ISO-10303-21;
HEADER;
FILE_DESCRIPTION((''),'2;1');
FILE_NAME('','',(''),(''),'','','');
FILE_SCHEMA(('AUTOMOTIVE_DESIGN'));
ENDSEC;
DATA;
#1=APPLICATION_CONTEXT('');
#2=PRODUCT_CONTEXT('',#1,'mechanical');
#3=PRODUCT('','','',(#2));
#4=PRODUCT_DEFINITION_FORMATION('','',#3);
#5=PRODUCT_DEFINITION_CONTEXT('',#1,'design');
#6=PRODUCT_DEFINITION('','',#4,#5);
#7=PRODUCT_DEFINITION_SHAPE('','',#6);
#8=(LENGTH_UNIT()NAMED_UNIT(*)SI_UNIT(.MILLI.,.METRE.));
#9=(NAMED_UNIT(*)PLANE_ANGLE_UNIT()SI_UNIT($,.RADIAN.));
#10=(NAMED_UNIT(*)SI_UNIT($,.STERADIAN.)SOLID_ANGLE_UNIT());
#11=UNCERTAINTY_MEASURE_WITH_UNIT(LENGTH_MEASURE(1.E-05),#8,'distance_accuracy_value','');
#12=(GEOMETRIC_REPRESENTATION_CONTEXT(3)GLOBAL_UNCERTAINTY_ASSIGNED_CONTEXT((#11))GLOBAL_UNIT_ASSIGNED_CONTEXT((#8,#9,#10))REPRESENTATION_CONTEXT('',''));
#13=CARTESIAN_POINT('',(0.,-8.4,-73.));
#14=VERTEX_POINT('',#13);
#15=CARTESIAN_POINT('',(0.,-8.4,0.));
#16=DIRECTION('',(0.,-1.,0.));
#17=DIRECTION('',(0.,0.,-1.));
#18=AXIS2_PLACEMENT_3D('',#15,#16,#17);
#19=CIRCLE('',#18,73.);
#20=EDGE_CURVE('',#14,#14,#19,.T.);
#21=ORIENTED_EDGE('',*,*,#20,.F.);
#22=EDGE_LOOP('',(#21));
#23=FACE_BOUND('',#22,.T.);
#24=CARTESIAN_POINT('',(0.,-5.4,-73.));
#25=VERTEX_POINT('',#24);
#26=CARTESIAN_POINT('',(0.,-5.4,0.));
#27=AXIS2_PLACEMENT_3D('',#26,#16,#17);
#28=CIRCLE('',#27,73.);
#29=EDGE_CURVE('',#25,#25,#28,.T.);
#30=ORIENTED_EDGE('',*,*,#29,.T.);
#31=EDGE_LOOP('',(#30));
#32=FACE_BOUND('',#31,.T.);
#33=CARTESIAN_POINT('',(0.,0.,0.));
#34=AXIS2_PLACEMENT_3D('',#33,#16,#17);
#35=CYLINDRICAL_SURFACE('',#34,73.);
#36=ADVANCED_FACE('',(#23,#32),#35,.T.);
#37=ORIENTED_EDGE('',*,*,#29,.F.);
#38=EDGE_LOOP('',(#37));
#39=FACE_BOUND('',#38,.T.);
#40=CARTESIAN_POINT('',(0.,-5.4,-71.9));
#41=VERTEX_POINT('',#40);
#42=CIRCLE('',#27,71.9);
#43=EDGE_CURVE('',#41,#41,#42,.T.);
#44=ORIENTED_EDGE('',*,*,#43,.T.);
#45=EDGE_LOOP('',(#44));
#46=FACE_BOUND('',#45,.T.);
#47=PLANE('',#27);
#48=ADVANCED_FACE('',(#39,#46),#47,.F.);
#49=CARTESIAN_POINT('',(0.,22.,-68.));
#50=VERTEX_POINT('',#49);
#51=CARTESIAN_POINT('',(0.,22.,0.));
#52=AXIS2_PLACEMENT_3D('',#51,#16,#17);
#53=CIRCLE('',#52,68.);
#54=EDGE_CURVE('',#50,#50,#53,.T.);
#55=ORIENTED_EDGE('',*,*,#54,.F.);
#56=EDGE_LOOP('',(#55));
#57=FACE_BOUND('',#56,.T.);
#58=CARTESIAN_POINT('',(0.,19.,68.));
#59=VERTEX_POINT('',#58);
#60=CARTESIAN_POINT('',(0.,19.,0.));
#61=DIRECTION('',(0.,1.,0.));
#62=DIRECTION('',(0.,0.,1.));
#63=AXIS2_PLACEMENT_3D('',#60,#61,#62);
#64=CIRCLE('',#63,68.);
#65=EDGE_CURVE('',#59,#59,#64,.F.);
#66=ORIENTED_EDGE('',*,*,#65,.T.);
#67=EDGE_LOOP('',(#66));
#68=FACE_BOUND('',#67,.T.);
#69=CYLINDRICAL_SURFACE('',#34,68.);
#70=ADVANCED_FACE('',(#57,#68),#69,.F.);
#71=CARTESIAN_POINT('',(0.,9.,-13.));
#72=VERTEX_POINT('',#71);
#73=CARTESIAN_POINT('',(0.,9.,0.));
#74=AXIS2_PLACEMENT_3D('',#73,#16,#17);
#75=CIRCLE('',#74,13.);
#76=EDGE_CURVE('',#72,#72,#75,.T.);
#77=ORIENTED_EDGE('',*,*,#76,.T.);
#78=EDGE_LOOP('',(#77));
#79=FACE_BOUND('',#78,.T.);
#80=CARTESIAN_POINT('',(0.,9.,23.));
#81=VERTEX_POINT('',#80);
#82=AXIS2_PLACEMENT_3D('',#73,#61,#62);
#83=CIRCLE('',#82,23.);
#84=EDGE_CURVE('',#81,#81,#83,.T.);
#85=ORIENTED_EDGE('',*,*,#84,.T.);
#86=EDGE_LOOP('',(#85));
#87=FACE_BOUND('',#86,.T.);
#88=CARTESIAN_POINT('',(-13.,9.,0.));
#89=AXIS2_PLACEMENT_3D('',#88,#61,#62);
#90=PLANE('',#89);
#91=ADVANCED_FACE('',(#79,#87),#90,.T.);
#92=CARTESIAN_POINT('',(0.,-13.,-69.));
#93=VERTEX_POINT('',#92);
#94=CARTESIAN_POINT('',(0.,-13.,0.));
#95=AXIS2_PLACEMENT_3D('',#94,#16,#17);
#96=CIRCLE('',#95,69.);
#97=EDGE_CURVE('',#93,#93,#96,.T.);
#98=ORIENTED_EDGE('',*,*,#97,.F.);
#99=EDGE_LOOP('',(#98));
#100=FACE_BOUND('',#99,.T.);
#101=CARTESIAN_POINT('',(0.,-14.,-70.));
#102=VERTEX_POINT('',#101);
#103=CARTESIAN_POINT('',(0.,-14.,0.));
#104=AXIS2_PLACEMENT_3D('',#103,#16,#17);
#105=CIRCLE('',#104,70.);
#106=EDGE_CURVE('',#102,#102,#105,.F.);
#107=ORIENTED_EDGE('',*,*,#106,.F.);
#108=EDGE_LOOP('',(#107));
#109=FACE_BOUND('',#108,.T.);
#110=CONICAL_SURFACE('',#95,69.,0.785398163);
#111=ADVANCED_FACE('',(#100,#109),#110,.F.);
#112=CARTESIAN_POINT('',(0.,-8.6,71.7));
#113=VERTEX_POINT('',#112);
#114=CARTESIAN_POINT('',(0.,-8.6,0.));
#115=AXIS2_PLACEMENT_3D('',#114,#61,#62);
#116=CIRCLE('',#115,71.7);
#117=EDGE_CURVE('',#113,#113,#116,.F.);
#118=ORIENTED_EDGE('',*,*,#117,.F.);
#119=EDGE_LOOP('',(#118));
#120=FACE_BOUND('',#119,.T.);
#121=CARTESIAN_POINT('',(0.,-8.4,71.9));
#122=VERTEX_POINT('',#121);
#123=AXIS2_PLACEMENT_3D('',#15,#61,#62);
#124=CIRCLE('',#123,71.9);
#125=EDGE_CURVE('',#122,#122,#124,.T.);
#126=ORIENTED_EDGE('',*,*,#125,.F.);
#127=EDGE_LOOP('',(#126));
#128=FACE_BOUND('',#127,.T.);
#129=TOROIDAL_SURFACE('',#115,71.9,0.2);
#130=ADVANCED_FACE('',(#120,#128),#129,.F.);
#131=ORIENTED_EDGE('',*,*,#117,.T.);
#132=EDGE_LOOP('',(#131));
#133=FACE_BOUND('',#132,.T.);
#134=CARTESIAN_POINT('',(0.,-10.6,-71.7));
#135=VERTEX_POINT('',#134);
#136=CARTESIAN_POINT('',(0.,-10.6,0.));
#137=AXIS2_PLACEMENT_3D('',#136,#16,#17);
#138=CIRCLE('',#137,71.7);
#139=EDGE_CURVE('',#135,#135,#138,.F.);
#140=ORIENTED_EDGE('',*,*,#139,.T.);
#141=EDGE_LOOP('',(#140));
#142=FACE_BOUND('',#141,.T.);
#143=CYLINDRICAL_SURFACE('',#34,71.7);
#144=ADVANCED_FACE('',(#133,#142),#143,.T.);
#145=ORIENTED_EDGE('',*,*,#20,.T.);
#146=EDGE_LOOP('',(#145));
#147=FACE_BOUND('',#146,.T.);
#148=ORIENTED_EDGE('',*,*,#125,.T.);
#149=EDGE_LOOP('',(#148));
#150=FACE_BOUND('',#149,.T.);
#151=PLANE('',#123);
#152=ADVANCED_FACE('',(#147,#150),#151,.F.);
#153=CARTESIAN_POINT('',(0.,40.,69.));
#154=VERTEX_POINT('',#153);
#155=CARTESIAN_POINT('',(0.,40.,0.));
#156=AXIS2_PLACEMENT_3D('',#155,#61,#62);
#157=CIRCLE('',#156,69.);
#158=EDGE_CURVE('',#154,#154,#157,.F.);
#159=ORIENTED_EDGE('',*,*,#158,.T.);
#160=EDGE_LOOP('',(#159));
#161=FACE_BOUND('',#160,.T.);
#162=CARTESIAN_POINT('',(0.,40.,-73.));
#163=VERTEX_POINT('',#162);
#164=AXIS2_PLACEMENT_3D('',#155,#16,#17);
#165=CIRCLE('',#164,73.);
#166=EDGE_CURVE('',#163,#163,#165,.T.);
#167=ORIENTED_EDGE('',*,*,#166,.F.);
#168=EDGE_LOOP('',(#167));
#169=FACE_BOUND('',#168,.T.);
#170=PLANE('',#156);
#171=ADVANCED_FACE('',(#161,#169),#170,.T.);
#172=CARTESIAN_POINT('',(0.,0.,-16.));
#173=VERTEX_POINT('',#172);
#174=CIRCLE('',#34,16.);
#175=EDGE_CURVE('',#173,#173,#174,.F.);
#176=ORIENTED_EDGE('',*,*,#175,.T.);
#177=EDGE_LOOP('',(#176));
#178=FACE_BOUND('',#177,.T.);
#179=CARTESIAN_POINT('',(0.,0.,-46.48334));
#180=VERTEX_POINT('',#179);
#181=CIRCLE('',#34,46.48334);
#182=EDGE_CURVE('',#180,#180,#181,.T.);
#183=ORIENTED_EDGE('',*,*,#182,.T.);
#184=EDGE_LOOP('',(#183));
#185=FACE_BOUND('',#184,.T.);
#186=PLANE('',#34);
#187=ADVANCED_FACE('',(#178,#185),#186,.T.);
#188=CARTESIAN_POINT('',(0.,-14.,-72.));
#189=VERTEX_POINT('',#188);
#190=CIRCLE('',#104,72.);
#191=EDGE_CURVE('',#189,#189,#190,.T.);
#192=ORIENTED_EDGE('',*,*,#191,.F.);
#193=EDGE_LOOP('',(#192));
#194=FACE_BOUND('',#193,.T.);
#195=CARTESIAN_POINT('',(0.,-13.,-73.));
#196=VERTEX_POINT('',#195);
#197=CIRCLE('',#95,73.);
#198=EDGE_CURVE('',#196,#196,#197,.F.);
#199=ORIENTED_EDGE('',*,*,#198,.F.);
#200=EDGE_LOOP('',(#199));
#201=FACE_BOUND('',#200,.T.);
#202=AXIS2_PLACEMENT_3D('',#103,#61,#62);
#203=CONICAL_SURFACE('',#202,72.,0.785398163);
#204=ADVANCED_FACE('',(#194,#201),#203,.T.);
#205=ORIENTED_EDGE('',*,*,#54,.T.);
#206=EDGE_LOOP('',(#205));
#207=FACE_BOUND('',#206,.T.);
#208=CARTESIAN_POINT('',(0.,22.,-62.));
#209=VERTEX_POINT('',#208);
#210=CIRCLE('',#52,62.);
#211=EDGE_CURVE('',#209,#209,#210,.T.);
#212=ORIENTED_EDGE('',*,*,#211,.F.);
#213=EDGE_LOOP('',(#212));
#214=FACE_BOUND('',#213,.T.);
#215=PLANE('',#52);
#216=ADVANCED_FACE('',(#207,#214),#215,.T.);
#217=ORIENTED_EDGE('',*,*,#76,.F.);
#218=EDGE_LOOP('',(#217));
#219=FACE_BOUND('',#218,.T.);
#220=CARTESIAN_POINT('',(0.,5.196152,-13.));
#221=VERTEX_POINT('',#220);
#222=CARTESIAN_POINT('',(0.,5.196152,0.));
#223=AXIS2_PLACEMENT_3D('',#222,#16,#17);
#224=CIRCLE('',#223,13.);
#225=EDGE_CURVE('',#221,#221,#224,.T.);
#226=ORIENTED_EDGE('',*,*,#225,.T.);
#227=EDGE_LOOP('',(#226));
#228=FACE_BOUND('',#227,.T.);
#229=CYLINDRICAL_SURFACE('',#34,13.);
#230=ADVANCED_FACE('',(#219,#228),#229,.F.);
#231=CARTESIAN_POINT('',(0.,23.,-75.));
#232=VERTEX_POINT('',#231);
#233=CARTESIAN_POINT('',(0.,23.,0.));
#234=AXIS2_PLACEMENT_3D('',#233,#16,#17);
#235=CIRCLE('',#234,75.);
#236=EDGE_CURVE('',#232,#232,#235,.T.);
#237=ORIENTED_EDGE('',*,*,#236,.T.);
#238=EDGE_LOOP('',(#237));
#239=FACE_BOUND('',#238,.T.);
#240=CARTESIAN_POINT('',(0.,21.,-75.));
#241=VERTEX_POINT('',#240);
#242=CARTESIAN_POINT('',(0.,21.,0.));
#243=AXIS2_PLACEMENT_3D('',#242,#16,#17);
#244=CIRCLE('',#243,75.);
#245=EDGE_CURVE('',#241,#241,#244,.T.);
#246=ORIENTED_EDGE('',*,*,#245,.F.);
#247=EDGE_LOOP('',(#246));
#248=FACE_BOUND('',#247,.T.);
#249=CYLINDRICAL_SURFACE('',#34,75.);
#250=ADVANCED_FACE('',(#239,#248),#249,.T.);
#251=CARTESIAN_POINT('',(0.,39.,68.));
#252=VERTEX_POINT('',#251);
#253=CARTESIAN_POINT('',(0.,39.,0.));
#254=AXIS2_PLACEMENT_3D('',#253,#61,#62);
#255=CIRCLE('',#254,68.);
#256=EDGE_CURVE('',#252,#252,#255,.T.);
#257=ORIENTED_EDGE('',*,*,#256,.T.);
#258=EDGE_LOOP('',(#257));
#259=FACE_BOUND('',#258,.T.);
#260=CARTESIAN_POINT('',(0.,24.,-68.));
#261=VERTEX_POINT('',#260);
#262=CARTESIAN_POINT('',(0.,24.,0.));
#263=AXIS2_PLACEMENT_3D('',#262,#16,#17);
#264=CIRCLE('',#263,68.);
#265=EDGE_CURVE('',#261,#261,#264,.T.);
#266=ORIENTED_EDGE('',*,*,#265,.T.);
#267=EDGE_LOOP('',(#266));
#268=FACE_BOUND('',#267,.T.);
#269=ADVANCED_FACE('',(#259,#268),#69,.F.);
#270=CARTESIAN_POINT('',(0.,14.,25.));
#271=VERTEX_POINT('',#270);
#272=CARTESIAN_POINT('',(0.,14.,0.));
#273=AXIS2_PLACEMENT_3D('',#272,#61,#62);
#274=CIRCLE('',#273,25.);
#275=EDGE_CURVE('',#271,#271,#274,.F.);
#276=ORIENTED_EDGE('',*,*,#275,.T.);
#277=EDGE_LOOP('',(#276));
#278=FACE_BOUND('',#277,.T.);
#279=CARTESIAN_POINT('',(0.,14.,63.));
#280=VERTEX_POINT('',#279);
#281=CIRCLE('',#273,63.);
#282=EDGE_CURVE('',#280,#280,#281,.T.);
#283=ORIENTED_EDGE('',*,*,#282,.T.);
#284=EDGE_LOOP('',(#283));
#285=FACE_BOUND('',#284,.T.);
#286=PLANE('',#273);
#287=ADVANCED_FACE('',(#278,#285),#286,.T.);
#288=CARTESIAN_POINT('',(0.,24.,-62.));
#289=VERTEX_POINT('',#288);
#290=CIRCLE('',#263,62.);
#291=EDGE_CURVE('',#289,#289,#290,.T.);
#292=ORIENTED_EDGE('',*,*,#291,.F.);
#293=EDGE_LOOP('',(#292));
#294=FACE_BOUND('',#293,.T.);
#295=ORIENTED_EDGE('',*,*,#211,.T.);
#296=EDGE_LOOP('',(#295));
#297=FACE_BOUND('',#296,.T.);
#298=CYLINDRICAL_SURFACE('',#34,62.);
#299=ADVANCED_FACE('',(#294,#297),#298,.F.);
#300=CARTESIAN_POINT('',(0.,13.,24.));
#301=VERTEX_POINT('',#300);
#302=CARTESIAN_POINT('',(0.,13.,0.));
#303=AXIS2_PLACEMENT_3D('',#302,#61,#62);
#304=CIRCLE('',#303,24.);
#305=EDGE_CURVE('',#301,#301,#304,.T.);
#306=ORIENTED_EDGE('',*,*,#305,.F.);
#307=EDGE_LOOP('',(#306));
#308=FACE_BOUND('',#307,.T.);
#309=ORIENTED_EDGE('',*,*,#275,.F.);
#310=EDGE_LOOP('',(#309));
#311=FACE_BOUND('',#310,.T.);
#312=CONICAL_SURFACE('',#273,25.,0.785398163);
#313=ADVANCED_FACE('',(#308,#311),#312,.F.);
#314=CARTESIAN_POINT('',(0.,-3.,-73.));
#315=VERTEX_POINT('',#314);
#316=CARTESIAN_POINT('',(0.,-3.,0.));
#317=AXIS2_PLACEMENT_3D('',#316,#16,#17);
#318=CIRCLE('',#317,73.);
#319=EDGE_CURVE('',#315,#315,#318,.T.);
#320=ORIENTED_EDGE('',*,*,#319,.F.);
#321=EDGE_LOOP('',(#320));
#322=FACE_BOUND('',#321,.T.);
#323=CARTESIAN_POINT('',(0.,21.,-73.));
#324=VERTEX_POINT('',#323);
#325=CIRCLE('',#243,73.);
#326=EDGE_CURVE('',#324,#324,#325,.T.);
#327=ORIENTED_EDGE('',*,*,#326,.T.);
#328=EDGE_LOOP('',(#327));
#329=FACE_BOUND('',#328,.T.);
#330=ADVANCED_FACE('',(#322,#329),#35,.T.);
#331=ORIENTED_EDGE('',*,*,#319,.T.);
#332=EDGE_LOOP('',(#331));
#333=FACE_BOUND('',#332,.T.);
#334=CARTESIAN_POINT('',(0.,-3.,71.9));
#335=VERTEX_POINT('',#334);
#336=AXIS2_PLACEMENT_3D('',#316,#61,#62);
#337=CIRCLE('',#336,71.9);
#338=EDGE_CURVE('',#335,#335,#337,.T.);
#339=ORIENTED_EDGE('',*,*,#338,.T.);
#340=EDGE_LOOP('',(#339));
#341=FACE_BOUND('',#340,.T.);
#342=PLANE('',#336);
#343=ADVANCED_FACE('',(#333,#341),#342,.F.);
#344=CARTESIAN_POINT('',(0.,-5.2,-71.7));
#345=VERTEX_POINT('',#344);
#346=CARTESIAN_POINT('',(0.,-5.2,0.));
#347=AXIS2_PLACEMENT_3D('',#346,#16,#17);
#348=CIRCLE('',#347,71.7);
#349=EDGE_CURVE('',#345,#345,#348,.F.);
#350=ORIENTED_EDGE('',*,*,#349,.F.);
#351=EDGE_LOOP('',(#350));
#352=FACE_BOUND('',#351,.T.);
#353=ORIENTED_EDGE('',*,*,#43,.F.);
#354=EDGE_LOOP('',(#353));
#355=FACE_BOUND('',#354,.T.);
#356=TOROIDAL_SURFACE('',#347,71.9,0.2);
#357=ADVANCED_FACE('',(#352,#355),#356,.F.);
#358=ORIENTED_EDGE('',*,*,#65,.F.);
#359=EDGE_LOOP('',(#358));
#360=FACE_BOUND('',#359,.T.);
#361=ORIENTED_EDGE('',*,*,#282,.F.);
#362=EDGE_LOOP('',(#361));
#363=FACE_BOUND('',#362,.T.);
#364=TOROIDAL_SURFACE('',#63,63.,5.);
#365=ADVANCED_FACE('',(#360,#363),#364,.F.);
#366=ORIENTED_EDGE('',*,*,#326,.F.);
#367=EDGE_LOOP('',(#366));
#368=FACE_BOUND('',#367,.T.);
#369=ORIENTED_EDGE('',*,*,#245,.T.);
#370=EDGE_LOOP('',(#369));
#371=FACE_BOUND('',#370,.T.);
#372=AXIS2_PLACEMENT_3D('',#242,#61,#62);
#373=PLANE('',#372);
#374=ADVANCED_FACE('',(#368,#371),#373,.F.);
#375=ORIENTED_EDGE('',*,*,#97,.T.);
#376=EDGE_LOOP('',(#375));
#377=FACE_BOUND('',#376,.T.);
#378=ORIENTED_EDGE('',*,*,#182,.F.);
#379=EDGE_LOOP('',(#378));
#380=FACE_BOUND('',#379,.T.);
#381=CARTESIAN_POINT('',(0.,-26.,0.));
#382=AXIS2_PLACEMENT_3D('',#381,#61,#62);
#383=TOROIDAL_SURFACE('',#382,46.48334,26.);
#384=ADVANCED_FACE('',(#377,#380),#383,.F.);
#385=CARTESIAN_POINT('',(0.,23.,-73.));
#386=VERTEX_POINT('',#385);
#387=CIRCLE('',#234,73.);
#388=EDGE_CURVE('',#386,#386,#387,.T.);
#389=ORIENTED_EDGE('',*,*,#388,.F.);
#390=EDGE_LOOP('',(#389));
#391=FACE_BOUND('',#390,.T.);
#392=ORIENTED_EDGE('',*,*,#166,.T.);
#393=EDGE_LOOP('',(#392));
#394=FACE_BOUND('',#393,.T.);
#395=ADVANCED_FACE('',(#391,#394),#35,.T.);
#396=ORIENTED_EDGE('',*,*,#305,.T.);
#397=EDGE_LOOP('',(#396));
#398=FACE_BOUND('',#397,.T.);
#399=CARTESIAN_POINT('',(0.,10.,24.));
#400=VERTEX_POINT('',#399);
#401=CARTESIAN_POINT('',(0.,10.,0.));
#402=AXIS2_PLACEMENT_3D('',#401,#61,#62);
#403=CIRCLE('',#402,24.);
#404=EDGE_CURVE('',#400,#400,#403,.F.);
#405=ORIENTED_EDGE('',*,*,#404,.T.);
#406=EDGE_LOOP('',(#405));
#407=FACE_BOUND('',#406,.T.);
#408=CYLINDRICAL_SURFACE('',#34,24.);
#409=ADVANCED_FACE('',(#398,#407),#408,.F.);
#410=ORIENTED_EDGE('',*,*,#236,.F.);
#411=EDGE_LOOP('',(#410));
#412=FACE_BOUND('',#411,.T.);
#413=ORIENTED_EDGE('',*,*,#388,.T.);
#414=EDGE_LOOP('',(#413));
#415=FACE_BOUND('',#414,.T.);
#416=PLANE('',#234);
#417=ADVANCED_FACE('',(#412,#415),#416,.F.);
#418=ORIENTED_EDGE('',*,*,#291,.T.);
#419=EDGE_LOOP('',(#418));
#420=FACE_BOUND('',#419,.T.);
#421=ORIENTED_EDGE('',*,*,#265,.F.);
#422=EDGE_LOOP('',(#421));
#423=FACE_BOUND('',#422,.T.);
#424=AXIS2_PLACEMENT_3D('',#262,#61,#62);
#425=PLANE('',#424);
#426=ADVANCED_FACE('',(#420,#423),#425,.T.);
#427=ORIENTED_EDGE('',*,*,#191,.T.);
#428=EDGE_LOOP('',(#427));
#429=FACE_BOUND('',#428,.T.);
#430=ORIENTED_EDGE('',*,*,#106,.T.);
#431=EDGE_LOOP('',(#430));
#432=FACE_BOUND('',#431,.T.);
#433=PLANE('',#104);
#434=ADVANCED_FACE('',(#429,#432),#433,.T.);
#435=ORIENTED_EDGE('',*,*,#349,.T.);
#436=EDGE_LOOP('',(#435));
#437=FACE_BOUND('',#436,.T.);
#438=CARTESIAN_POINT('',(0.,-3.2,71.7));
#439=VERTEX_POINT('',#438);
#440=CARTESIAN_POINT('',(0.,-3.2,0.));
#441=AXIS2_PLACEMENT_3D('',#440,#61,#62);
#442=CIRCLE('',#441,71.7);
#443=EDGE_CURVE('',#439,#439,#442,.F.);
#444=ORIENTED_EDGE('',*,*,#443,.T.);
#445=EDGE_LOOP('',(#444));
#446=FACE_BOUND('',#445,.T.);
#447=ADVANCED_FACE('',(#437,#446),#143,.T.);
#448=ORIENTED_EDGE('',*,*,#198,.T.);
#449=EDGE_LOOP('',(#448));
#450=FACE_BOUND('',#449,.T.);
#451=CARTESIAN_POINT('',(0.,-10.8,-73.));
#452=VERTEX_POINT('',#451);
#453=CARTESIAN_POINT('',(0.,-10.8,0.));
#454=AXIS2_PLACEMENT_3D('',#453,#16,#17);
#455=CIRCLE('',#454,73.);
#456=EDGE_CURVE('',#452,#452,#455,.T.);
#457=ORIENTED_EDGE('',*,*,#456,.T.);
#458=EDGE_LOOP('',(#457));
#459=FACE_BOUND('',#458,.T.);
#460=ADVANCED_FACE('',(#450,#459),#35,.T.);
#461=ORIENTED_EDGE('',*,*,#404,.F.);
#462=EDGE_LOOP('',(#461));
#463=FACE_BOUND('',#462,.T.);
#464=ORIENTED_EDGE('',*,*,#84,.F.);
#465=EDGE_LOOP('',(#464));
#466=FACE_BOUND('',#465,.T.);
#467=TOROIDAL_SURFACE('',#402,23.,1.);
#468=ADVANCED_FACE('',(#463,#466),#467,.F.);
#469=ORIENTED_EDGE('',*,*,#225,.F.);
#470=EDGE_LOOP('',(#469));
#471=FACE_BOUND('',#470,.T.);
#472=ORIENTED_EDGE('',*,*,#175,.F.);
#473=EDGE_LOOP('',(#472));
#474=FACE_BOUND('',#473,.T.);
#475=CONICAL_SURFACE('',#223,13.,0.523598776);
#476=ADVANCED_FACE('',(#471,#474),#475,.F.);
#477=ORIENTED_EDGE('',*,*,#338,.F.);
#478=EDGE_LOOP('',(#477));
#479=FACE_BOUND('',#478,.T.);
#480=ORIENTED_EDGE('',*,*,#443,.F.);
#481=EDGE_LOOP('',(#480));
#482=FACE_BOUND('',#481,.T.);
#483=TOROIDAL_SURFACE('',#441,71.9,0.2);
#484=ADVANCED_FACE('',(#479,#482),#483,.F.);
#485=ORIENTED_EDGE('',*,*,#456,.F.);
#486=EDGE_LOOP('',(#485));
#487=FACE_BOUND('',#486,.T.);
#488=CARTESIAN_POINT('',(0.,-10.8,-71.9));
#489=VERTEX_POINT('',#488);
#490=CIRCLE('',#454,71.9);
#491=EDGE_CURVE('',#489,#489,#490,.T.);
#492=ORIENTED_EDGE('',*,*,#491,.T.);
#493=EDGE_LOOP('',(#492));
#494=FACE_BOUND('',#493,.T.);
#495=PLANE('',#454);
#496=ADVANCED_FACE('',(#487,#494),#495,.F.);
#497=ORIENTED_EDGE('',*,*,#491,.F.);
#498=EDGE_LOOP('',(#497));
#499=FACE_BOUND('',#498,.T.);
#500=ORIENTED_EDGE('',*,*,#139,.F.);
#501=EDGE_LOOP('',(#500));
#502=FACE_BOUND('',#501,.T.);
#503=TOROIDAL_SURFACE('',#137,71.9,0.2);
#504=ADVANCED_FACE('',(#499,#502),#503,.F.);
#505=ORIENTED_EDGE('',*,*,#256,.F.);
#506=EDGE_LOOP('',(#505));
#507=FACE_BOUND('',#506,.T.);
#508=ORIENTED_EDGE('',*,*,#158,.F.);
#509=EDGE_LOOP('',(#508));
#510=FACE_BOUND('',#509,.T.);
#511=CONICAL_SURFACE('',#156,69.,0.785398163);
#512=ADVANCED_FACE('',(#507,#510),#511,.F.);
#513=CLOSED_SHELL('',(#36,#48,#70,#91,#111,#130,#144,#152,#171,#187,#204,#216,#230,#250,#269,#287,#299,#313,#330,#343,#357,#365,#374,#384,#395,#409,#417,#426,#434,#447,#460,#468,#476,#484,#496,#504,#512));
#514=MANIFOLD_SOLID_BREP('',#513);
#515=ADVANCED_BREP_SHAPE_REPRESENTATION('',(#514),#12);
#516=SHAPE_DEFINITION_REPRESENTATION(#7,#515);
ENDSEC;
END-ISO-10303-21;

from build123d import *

# Parameters (mm, degrees)
SCHIZZO1_W    = 11
SCHIZZO1_H    = 5
SCHIZZO1_W_2  = 2
SCHIZZO1_H_2  = 2
SCHIZZO1_W_3  = 6
SMUSSO1_SIZE  = 3
SMUSSO1_SIZE2 = 5.196152423
SMUSSO2_SIZE  = 1
RACCORDO1_R   = 26
SMUSSO3_SIZE  = 1
RACCORDO2_R   = 0.2
SCHIZZO2_W    = 11
SCHIZZO2_H    = 5
RACCORDO3_R   = 1
SMUSSO4_SIZE  = 1
RACCORDO4_R   = 5
SMUSSO5_SIZE  = 1


with BuildPart() as part:
    # Schizzo1 → Rivoluzione1 (revolve)
    with BuildSketch(Plane.XY, mode=Mode.PRIVATE) as rivoluzione1_sk:
        Polygon((-13, 9), (-13, 0), (-73, 0), (-73, 14), (-24, 14), (-24, 9), align=None)
        with Locations((-18.5, 11.5)):
            Rectangle(SCHIZZO1_W, SCHIZZO1_H)
        Polygon((-73, 21), (-73, 14), (-68, 14), (-68, 22), (-68, 24), (-68, 40), (-73, 40), (-73, 23), align=None)
        Polygon((-69, -14), (-69, 0), (-73, 0), (-73, -3), (-71.7, -3), (-71.7, -5.4), (-73, -5.4), (-73, -8.4), (-71.7, -8.4), (-71.7, -10.8), (-73, -10.8), (-73, -14), align=None)
        with Locations((-74, 22)):
            Rectangle(SCHIZZO1_W_2, SCHIZZO1_H_2)
        with Locations((-65, 23)):
            Rectangle(SCHIZZO1_W_3, SCHIZZO1_H_2)
    revolve(rivoluzione1_sk.sketch.rotate(Axis((0, 0, 0), (0, 1, 0)), 270), axis=Axis((0, 0, 0), (0, 1, 0)))

    # Smusso1
    smusso1_edges = [part.edges().sort_by_distance(p)[0] for p in [
        (0, 0, 13),
    ]]
    smusso1_side = [part.faces().sort_by_distance(p)[0] for p in [
        (0, 0, 67.048385284),
    ]]
    chamfer(smusso1_edges, length=SMUSSO1_SIZE, length2=SMUSSO1_SIZE2, reference=smusso1_side[0])

    # Smusso2
    smusso2_edges = [part.edges().sort_by_distance(p)[0] for p in [
        (0, -14, 69),
    ]]
    chamfer(smusso2_edges, length=SMUSSO2_SIZE)

    # Raccordo1
    # the kernel refuses this fillet: 26 mm, written as the material it adds along each edge
    with BuildSketch(Plane(origin=(0, 0, 0), x_dir=(0, 0, -1), z_dir=(1, 0, 0))) as raccordo1_piece_1:
        with BuildLine():
            CenterArc((46.483339502, -26), RACCORDO1_R, 30, 60)
            Line((46.483339502, 0), (46.483339502, 0.52))
            Line((46.483339502, 0.52), (69, 0.52))
            Line((69, 0.52), (69.52, 0))
            ThreePointArc((69.52, 0), (69.52, -6.5), (69.45033321, -12.74))
            Line((69.45033321, -12.74), (69, -13))
        make_face()
    revolve(axis=Axis((0, 0, 0), (0, 1, 0)))

    # Smusso3
    smusso3_edges = [part.edges().sort_by_distance(p)[0] for p in [
        (0, 40, 68),
    ]]
    chamfer(smusso3_edges, length=SMUSSO3_SIZE)

    # Raccordo2
    raccordo2_edges = [part.edges().sort_by_distance(p)[0] for p in [
        (0, -10.8, 71.7),
        (0, -8.4, 71.7),
        (0, -5.4, 71.7),
        (0, -3, 71.7),
    ]]
    fillet(raccordo2_edges, radius=RACCORDO2_R)

    # Schizzo2 → Taglia-Rivoluzione1 (revolve, cut)
    with BuildSketch(Plane.XY, mode=Mode.PRIVATE) as taglia_rivoluzione1_sk:
        with Locations((-18.5, 11.5)):
            Rectangle(SCHIZZO2_W, SCHIZZO2_H)
    revolve(taglia_rivoluzione1_sk.sketch.rotate(Axis((0, 0, 0), (0, 1, 0)), 90), axis=Axis((0, 0, 0), (0, 1, 0)), mode=Mode.SUBTRACT)

    # Raccordo3
    raccordo3_edges = [part.edges().sort_by_distance(p)[0] for p in [
        (0, 9, -24),
    ]]
    fillet(raccordo3_edges, radius=RACCORDO3_R)

    # Smusso4
    smusso4_edges = [part.edges().sort_by_distance(p)[0] for p in [
        (0, 14, -24),
    ]]
    chamfer(smusso4_edges, length=SMUSSO4_SIZE)

    # Raccordo4
    raccordo4_edges = [part.edges().sort_by_distance(p)[0] for p in [
        (0, 14, 68),
    ]]
    fillet(raccordo4_edges, radius=RACCORDO4_R)

    # Smusso5
    smusso5_edges = [part.edges().sort_by_distance(p)[0] for p in [
        (0, -14, 73),
    ]]
    chamfer(smusso5_edges, length=SMUSSO5_SIZE)


solid = part.part
